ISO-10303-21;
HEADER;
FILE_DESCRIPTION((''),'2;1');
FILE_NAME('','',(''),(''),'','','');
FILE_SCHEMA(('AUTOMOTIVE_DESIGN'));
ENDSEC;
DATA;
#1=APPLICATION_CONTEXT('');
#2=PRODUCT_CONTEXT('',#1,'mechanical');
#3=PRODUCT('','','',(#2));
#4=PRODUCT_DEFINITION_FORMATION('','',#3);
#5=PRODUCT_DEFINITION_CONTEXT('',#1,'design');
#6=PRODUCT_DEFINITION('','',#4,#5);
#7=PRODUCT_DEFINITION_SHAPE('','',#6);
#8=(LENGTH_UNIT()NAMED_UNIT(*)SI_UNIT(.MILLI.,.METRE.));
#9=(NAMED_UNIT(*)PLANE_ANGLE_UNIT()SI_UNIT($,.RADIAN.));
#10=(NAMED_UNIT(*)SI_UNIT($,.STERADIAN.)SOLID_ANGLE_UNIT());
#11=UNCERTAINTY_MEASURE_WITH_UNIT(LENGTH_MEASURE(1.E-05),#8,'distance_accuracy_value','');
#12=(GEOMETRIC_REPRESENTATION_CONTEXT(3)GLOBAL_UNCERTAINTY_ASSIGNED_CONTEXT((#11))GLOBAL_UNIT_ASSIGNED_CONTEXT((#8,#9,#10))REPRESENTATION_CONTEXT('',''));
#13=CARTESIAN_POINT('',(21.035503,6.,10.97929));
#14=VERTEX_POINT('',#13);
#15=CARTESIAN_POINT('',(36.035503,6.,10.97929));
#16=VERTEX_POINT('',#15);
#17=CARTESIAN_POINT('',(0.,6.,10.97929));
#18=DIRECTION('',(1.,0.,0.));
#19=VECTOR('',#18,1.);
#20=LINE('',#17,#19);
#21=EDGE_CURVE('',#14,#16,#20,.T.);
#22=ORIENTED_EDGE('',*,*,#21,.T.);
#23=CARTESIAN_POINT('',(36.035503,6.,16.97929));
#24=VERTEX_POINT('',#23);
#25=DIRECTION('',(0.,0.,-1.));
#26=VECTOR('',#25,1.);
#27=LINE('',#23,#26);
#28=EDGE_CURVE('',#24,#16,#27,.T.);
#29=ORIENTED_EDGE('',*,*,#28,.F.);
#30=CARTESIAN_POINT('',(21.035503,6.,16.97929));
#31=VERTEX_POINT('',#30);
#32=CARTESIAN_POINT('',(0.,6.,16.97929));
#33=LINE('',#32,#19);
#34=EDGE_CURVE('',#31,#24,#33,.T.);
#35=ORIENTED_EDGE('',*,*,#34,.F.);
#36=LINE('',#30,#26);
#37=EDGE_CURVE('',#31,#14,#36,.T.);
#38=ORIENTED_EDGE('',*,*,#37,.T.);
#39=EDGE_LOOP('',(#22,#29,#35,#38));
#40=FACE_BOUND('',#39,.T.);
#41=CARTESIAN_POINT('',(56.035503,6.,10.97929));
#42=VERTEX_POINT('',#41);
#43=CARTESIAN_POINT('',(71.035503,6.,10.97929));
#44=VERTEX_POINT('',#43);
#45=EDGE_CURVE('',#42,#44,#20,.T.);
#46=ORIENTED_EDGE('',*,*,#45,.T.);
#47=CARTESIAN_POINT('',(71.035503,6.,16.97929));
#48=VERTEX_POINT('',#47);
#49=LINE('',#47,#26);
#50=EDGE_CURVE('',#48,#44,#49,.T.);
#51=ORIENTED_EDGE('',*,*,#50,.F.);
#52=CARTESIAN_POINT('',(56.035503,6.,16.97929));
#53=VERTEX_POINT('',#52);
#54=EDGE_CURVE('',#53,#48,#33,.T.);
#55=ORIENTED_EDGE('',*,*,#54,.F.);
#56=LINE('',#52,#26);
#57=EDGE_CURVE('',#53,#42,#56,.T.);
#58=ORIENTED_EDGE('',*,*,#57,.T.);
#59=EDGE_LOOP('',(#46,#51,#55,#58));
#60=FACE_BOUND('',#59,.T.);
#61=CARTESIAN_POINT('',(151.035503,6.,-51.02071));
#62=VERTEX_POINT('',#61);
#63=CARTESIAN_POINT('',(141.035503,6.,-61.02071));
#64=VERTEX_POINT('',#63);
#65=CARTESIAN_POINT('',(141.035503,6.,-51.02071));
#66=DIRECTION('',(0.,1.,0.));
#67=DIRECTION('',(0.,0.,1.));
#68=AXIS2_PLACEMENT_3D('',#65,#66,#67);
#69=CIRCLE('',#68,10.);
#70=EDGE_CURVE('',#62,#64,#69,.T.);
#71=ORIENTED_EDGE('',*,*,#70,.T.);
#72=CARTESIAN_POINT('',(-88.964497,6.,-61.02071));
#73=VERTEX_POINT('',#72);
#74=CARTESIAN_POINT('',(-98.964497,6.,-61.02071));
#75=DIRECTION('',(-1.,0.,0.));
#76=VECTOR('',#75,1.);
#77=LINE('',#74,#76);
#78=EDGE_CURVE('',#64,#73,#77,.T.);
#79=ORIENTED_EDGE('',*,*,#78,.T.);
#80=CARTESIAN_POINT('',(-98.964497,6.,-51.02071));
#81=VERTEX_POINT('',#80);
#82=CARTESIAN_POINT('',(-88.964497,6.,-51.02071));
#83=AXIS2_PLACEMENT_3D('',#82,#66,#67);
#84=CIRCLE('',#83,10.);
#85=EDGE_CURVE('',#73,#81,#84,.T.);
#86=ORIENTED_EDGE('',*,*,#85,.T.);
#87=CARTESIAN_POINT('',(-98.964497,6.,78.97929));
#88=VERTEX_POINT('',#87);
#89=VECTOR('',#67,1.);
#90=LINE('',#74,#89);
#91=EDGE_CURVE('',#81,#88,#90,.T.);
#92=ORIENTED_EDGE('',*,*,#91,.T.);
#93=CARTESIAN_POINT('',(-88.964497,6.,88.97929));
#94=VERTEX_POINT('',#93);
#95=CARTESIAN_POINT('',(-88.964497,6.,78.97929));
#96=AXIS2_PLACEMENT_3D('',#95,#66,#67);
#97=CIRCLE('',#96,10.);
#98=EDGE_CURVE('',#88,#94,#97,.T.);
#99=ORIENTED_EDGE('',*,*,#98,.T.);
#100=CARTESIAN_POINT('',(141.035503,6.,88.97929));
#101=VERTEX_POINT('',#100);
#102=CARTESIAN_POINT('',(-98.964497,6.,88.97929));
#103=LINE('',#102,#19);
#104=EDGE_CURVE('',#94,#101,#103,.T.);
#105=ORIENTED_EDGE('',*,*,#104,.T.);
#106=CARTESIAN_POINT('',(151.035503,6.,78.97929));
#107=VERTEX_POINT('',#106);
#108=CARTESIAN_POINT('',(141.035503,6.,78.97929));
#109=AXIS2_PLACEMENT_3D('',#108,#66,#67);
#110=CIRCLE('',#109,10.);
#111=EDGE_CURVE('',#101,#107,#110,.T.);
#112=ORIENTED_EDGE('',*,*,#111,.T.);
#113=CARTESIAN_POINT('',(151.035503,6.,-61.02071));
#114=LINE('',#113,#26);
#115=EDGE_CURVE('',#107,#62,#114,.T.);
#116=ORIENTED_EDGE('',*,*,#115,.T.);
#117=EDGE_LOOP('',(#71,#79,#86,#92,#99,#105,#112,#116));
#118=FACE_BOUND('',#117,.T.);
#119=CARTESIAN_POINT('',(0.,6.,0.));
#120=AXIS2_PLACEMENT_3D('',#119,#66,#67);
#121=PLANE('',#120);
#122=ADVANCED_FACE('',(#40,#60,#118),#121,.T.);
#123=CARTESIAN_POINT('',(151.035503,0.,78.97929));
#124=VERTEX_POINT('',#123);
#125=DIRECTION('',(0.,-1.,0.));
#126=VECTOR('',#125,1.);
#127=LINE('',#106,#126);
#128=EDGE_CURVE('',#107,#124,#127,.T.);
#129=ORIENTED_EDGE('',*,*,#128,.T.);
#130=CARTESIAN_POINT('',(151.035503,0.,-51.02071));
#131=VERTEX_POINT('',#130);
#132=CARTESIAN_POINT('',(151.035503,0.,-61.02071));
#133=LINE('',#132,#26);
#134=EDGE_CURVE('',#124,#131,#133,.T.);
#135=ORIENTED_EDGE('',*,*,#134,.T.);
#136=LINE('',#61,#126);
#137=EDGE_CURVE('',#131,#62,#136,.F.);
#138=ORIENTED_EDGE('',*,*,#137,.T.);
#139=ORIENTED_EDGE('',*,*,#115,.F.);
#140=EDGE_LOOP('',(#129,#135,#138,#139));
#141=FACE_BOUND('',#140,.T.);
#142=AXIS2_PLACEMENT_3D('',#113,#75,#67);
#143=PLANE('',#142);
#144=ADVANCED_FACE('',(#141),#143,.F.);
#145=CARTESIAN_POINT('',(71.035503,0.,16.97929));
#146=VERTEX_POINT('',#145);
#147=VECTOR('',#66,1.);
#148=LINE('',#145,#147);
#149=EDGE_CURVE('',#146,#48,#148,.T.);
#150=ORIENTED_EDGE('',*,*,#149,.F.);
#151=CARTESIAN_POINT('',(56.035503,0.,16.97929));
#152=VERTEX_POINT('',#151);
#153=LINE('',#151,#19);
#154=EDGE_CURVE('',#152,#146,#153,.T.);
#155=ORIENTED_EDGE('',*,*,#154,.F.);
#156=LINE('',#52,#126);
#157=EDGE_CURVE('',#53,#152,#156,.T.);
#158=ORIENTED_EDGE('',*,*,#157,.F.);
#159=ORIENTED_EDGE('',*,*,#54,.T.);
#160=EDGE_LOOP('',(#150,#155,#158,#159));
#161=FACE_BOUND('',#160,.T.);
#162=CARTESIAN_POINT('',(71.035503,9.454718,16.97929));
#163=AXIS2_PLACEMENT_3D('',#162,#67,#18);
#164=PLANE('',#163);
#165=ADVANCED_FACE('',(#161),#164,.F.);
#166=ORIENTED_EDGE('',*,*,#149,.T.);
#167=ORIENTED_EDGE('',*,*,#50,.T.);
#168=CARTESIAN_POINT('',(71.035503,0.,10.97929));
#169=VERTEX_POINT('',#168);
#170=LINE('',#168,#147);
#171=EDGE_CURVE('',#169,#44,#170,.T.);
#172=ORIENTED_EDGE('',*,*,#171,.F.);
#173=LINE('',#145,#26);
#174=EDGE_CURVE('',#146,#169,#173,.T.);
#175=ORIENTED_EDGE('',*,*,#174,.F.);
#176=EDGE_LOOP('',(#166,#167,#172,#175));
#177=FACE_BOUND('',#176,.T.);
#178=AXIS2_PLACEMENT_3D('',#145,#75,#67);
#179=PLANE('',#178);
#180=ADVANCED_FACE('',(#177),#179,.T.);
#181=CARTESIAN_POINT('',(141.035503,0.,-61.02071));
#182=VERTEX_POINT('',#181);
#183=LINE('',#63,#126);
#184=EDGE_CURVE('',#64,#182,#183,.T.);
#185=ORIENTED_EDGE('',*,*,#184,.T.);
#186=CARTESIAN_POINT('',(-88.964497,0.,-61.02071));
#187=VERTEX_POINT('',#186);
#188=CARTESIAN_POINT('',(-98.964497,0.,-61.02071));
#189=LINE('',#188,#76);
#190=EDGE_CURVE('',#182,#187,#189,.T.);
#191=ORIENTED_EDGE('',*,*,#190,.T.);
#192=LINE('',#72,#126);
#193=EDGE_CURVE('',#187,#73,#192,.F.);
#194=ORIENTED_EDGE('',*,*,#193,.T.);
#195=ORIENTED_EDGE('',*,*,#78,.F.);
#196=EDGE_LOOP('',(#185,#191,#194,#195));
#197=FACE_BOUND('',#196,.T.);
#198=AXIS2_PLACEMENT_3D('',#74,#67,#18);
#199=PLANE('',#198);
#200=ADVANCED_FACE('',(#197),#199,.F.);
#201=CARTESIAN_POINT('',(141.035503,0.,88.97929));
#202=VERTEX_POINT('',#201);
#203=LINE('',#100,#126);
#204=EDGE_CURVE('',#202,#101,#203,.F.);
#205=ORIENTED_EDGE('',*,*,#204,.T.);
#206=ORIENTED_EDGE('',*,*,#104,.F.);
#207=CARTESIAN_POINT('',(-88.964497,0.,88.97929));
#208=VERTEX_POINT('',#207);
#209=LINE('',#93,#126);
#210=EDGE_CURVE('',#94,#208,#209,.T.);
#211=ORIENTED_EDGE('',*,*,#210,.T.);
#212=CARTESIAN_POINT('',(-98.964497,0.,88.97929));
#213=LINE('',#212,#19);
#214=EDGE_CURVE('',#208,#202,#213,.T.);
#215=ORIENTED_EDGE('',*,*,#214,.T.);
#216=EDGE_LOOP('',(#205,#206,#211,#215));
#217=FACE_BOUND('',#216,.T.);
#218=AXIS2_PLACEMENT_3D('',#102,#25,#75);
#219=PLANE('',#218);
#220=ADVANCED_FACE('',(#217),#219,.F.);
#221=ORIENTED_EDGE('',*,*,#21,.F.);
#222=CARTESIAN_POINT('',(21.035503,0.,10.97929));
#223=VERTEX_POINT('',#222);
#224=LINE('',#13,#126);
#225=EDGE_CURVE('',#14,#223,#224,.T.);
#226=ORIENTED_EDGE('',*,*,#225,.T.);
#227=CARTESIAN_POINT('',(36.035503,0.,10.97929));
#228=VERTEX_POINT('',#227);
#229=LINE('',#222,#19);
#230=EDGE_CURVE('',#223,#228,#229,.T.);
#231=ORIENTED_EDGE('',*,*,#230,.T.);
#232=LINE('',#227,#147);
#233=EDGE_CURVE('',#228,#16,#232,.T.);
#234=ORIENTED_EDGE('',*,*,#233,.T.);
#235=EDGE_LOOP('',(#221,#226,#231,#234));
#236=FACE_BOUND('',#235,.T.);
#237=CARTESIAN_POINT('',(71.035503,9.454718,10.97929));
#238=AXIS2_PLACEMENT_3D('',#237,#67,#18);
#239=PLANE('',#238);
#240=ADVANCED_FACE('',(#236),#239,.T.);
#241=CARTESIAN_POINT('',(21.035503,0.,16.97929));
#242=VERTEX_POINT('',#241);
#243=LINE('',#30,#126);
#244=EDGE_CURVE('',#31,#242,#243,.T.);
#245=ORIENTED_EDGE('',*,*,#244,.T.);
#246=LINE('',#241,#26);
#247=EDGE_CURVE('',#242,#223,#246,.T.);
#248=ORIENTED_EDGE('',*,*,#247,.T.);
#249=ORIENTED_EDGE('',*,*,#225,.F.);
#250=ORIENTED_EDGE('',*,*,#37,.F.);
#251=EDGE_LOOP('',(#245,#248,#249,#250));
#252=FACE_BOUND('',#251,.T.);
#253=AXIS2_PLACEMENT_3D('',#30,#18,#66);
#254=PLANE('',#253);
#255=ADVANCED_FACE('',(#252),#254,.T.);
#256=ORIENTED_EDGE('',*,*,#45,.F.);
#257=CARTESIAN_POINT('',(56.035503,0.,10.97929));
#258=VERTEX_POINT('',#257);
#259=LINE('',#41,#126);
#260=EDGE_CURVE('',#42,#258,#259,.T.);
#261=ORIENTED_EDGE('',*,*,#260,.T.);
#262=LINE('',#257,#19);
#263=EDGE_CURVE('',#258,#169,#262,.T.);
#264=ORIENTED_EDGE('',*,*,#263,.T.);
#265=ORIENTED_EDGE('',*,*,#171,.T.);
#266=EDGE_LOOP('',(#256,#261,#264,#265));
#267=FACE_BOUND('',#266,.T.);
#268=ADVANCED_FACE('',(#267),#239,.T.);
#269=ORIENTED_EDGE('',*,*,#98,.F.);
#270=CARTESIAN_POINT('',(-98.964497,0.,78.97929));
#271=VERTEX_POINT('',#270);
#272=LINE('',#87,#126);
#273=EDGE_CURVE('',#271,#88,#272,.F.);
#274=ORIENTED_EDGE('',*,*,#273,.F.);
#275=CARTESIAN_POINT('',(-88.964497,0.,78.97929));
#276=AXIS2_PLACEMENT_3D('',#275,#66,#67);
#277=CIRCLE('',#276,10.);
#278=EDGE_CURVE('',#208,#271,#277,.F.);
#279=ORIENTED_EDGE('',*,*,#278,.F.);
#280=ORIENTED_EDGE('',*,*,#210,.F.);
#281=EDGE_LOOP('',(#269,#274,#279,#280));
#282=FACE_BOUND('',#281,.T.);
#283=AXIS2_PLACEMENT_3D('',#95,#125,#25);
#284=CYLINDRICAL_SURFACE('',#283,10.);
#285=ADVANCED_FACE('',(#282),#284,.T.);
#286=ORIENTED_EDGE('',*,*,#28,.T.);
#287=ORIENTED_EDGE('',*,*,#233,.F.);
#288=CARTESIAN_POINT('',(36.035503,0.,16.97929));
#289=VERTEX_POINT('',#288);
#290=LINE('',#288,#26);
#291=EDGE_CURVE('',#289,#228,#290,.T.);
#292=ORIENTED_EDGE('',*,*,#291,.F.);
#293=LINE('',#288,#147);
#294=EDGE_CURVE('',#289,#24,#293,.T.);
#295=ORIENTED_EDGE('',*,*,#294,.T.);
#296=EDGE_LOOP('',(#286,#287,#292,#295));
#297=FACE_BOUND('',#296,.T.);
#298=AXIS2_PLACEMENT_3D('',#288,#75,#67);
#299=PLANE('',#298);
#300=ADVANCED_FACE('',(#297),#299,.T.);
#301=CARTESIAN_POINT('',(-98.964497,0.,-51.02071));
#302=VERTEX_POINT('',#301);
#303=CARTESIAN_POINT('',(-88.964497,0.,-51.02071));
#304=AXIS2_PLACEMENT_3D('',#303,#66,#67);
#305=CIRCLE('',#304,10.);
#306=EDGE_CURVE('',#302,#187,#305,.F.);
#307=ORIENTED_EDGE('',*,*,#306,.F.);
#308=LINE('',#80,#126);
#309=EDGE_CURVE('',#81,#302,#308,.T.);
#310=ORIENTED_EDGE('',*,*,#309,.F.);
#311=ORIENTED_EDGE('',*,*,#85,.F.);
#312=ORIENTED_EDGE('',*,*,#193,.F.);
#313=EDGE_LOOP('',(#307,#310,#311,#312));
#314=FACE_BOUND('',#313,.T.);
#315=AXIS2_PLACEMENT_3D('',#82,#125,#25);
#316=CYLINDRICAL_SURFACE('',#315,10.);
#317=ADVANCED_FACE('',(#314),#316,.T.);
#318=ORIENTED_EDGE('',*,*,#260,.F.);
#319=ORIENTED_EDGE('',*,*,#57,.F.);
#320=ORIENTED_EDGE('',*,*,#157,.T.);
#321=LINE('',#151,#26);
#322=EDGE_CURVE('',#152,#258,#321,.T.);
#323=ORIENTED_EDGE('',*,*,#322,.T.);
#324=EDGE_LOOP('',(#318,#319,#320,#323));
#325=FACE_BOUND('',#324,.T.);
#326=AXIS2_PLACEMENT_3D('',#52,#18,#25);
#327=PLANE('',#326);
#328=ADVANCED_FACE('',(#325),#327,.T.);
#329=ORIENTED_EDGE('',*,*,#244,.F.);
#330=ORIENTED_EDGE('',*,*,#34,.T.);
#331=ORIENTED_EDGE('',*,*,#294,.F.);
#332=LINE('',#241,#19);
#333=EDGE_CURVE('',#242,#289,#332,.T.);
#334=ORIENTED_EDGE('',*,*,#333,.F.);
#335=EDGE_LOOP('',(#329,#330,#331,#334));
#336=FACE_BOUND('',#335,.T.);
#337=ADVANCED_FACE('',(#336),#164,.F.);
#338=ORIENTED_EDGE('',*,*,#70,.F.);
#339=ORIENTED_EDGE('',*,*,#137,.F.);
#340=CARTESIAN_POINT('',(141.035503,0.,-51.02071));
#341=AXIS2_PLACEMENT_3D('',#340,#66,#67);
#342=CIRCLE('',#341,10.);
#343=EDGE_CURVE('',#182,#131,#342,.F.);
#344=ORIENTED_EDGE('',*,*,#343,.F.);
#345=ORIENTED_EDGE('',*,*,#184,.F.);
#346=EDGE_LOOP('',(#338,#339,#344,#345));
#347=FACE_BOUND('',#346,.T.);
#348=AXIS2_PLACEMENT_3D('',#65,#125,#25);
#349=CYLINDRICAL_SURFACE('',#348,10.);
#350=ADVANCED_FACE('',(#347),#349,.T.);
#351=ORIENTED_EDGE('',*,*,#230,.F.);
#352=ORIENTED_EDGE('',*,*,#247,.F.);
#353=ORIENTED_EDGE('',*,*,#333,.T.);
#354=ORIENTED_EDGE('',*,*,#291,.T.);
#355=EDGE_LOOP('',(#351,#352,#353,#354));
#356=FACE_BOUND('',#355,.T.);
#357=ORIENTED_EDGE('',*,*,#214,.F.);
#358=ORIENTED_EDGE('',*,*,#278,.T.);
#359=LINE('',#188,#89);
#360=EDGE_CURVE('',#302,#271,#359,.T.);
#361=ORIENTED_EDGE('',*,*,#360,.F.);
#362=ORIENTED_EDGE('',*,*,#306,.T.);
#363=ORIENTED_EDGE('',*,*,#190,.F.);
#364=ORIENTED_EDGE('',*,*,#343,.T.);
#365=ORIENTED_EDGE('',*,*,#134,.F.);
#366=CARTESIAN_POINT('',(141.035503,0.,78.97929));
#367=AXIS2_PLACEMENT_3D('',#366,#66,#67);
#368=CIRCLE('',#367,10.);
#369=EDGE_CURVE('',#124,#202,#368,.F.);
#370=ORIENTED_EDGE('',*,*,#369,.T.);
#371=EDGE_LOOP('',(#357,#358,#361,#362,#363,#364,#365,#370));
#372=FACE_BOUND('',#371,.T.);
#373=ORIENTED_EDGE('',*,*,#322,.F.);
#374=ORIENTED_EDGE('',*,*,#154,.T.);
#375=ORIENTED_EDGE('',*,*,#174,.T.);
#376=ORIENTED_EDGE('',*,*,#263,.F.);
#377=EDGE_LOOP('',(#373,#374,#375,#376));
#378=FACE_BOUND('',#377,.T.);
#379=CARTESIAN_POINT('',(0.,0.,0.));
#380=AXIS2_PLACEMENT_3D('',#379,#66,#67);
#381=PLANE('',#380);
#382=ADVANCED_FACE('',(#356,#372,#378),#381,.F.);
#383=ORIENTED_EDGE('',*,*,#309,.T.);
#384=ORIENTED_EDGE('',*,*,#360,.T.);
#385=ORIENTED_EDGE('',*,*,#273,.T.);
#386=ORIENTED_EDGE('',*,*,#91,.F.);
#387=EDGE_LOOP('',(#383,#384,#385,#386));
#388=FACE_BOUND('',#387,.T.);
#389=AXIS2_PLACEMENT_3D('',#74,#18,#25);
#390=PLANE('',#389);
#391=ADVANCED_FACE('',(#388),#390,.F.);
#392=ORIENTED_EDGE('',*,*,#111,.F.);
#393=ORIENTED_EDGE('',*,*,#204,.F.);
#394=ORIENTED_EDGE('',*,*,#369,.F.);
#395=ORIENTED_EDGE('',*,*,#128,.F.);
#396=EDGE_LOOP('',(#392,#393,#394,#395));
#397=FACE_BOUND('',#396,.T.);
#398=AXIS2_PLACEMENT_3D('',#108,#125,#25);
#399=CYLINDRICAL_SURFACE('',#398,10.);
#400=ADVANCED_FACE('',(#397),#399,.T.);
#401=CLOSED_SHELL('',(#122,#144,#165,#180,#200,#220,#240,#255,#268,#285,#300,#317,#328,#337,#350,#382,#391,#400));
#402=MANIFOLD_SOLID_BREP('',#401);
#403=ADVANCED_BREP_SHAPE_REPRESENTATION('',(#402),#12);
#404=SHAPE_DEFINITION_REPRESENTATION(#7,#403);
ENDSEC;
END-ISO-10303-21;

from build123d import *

# Parameters (mm, degrees)
ESQUISSE1_W            = 250
ESQUISSE1_H            = 150
BOSS_EXTRU_1_DEPTH     = 6
EMPREINTE1_START       = 21.035502959
EMPREINTE1_OUTLINE_W   = 6
EMPREINTE1_OUTLINE_H   = 6
EMPREINTE1_DEPTH       = 15
EMPREINTE1_START_2     = 56.035502959
EMPREINTE1_2_OUTLINE_W = 6
EMPREINTE1_2_OUTLINE_H = 6
EMPREINTE1_2_DEPTH     = 15
CONG_1_R               = 10


# Read off the part's stored shape, not the designer's step: Empreinte1
with BuildPart() as part:
    # Esquisse1 → Boss.-Extru.1 (new body)
    with BuildSketch(Plane(origin=(0, 0, 0), x_dir=(1, 0, 0), z_dir=(0, 1, 0))):
        with Locations((26.035502959, -13.979289941)):
            Rectangle(ESQUISSE1_W, ESQUISSE1_H)
    extrude(amount=BOSS_EXTRU_1_DEPTH)

    # Empreinte1 outline → Empreinte1 (cut)
    with BuildSketch(Plane.YZ.offset(EMPREINTE1_START)):
        with Locations((3, 13.979289941)):
            Rectangle(EMPREINTE1_OUTLINE_W, EMPREINTE1_OUTLINE_H)
    extrude(amount=EMPREINTE1_DEPTH, mode=Mode.SUBTRACT)

    # Empreinte1 2 outline → Empreinte1 2 (cut)
    with BuildSketch(Plane.YZ.offset(EMPREINTE1_START_2)):
        with Locations((3, 13.979289941)):
            Rectangle(EMPREINTE1_2_OUTLINE_W, EMPREINTE1_2_OUTLINE_H)
    extrude(amount=EMPREINTE1_2_DEPTH, mode=Mode.SUBTRACT)

    # Congé1
    cong_1_edges = [part.edges().sort_by_distance(p)[0] for p in [
        (-98.964497041, 3, -61.020710059),
        (151.035502959, 3, -61.020710059),
        (151.035502959, 3, 88.979289941),
        (-98.964497041, 3, 88.979289941),
    ]]
    fillet(cong_1_edges, radius=CONG_1_R)


solid = part.part
